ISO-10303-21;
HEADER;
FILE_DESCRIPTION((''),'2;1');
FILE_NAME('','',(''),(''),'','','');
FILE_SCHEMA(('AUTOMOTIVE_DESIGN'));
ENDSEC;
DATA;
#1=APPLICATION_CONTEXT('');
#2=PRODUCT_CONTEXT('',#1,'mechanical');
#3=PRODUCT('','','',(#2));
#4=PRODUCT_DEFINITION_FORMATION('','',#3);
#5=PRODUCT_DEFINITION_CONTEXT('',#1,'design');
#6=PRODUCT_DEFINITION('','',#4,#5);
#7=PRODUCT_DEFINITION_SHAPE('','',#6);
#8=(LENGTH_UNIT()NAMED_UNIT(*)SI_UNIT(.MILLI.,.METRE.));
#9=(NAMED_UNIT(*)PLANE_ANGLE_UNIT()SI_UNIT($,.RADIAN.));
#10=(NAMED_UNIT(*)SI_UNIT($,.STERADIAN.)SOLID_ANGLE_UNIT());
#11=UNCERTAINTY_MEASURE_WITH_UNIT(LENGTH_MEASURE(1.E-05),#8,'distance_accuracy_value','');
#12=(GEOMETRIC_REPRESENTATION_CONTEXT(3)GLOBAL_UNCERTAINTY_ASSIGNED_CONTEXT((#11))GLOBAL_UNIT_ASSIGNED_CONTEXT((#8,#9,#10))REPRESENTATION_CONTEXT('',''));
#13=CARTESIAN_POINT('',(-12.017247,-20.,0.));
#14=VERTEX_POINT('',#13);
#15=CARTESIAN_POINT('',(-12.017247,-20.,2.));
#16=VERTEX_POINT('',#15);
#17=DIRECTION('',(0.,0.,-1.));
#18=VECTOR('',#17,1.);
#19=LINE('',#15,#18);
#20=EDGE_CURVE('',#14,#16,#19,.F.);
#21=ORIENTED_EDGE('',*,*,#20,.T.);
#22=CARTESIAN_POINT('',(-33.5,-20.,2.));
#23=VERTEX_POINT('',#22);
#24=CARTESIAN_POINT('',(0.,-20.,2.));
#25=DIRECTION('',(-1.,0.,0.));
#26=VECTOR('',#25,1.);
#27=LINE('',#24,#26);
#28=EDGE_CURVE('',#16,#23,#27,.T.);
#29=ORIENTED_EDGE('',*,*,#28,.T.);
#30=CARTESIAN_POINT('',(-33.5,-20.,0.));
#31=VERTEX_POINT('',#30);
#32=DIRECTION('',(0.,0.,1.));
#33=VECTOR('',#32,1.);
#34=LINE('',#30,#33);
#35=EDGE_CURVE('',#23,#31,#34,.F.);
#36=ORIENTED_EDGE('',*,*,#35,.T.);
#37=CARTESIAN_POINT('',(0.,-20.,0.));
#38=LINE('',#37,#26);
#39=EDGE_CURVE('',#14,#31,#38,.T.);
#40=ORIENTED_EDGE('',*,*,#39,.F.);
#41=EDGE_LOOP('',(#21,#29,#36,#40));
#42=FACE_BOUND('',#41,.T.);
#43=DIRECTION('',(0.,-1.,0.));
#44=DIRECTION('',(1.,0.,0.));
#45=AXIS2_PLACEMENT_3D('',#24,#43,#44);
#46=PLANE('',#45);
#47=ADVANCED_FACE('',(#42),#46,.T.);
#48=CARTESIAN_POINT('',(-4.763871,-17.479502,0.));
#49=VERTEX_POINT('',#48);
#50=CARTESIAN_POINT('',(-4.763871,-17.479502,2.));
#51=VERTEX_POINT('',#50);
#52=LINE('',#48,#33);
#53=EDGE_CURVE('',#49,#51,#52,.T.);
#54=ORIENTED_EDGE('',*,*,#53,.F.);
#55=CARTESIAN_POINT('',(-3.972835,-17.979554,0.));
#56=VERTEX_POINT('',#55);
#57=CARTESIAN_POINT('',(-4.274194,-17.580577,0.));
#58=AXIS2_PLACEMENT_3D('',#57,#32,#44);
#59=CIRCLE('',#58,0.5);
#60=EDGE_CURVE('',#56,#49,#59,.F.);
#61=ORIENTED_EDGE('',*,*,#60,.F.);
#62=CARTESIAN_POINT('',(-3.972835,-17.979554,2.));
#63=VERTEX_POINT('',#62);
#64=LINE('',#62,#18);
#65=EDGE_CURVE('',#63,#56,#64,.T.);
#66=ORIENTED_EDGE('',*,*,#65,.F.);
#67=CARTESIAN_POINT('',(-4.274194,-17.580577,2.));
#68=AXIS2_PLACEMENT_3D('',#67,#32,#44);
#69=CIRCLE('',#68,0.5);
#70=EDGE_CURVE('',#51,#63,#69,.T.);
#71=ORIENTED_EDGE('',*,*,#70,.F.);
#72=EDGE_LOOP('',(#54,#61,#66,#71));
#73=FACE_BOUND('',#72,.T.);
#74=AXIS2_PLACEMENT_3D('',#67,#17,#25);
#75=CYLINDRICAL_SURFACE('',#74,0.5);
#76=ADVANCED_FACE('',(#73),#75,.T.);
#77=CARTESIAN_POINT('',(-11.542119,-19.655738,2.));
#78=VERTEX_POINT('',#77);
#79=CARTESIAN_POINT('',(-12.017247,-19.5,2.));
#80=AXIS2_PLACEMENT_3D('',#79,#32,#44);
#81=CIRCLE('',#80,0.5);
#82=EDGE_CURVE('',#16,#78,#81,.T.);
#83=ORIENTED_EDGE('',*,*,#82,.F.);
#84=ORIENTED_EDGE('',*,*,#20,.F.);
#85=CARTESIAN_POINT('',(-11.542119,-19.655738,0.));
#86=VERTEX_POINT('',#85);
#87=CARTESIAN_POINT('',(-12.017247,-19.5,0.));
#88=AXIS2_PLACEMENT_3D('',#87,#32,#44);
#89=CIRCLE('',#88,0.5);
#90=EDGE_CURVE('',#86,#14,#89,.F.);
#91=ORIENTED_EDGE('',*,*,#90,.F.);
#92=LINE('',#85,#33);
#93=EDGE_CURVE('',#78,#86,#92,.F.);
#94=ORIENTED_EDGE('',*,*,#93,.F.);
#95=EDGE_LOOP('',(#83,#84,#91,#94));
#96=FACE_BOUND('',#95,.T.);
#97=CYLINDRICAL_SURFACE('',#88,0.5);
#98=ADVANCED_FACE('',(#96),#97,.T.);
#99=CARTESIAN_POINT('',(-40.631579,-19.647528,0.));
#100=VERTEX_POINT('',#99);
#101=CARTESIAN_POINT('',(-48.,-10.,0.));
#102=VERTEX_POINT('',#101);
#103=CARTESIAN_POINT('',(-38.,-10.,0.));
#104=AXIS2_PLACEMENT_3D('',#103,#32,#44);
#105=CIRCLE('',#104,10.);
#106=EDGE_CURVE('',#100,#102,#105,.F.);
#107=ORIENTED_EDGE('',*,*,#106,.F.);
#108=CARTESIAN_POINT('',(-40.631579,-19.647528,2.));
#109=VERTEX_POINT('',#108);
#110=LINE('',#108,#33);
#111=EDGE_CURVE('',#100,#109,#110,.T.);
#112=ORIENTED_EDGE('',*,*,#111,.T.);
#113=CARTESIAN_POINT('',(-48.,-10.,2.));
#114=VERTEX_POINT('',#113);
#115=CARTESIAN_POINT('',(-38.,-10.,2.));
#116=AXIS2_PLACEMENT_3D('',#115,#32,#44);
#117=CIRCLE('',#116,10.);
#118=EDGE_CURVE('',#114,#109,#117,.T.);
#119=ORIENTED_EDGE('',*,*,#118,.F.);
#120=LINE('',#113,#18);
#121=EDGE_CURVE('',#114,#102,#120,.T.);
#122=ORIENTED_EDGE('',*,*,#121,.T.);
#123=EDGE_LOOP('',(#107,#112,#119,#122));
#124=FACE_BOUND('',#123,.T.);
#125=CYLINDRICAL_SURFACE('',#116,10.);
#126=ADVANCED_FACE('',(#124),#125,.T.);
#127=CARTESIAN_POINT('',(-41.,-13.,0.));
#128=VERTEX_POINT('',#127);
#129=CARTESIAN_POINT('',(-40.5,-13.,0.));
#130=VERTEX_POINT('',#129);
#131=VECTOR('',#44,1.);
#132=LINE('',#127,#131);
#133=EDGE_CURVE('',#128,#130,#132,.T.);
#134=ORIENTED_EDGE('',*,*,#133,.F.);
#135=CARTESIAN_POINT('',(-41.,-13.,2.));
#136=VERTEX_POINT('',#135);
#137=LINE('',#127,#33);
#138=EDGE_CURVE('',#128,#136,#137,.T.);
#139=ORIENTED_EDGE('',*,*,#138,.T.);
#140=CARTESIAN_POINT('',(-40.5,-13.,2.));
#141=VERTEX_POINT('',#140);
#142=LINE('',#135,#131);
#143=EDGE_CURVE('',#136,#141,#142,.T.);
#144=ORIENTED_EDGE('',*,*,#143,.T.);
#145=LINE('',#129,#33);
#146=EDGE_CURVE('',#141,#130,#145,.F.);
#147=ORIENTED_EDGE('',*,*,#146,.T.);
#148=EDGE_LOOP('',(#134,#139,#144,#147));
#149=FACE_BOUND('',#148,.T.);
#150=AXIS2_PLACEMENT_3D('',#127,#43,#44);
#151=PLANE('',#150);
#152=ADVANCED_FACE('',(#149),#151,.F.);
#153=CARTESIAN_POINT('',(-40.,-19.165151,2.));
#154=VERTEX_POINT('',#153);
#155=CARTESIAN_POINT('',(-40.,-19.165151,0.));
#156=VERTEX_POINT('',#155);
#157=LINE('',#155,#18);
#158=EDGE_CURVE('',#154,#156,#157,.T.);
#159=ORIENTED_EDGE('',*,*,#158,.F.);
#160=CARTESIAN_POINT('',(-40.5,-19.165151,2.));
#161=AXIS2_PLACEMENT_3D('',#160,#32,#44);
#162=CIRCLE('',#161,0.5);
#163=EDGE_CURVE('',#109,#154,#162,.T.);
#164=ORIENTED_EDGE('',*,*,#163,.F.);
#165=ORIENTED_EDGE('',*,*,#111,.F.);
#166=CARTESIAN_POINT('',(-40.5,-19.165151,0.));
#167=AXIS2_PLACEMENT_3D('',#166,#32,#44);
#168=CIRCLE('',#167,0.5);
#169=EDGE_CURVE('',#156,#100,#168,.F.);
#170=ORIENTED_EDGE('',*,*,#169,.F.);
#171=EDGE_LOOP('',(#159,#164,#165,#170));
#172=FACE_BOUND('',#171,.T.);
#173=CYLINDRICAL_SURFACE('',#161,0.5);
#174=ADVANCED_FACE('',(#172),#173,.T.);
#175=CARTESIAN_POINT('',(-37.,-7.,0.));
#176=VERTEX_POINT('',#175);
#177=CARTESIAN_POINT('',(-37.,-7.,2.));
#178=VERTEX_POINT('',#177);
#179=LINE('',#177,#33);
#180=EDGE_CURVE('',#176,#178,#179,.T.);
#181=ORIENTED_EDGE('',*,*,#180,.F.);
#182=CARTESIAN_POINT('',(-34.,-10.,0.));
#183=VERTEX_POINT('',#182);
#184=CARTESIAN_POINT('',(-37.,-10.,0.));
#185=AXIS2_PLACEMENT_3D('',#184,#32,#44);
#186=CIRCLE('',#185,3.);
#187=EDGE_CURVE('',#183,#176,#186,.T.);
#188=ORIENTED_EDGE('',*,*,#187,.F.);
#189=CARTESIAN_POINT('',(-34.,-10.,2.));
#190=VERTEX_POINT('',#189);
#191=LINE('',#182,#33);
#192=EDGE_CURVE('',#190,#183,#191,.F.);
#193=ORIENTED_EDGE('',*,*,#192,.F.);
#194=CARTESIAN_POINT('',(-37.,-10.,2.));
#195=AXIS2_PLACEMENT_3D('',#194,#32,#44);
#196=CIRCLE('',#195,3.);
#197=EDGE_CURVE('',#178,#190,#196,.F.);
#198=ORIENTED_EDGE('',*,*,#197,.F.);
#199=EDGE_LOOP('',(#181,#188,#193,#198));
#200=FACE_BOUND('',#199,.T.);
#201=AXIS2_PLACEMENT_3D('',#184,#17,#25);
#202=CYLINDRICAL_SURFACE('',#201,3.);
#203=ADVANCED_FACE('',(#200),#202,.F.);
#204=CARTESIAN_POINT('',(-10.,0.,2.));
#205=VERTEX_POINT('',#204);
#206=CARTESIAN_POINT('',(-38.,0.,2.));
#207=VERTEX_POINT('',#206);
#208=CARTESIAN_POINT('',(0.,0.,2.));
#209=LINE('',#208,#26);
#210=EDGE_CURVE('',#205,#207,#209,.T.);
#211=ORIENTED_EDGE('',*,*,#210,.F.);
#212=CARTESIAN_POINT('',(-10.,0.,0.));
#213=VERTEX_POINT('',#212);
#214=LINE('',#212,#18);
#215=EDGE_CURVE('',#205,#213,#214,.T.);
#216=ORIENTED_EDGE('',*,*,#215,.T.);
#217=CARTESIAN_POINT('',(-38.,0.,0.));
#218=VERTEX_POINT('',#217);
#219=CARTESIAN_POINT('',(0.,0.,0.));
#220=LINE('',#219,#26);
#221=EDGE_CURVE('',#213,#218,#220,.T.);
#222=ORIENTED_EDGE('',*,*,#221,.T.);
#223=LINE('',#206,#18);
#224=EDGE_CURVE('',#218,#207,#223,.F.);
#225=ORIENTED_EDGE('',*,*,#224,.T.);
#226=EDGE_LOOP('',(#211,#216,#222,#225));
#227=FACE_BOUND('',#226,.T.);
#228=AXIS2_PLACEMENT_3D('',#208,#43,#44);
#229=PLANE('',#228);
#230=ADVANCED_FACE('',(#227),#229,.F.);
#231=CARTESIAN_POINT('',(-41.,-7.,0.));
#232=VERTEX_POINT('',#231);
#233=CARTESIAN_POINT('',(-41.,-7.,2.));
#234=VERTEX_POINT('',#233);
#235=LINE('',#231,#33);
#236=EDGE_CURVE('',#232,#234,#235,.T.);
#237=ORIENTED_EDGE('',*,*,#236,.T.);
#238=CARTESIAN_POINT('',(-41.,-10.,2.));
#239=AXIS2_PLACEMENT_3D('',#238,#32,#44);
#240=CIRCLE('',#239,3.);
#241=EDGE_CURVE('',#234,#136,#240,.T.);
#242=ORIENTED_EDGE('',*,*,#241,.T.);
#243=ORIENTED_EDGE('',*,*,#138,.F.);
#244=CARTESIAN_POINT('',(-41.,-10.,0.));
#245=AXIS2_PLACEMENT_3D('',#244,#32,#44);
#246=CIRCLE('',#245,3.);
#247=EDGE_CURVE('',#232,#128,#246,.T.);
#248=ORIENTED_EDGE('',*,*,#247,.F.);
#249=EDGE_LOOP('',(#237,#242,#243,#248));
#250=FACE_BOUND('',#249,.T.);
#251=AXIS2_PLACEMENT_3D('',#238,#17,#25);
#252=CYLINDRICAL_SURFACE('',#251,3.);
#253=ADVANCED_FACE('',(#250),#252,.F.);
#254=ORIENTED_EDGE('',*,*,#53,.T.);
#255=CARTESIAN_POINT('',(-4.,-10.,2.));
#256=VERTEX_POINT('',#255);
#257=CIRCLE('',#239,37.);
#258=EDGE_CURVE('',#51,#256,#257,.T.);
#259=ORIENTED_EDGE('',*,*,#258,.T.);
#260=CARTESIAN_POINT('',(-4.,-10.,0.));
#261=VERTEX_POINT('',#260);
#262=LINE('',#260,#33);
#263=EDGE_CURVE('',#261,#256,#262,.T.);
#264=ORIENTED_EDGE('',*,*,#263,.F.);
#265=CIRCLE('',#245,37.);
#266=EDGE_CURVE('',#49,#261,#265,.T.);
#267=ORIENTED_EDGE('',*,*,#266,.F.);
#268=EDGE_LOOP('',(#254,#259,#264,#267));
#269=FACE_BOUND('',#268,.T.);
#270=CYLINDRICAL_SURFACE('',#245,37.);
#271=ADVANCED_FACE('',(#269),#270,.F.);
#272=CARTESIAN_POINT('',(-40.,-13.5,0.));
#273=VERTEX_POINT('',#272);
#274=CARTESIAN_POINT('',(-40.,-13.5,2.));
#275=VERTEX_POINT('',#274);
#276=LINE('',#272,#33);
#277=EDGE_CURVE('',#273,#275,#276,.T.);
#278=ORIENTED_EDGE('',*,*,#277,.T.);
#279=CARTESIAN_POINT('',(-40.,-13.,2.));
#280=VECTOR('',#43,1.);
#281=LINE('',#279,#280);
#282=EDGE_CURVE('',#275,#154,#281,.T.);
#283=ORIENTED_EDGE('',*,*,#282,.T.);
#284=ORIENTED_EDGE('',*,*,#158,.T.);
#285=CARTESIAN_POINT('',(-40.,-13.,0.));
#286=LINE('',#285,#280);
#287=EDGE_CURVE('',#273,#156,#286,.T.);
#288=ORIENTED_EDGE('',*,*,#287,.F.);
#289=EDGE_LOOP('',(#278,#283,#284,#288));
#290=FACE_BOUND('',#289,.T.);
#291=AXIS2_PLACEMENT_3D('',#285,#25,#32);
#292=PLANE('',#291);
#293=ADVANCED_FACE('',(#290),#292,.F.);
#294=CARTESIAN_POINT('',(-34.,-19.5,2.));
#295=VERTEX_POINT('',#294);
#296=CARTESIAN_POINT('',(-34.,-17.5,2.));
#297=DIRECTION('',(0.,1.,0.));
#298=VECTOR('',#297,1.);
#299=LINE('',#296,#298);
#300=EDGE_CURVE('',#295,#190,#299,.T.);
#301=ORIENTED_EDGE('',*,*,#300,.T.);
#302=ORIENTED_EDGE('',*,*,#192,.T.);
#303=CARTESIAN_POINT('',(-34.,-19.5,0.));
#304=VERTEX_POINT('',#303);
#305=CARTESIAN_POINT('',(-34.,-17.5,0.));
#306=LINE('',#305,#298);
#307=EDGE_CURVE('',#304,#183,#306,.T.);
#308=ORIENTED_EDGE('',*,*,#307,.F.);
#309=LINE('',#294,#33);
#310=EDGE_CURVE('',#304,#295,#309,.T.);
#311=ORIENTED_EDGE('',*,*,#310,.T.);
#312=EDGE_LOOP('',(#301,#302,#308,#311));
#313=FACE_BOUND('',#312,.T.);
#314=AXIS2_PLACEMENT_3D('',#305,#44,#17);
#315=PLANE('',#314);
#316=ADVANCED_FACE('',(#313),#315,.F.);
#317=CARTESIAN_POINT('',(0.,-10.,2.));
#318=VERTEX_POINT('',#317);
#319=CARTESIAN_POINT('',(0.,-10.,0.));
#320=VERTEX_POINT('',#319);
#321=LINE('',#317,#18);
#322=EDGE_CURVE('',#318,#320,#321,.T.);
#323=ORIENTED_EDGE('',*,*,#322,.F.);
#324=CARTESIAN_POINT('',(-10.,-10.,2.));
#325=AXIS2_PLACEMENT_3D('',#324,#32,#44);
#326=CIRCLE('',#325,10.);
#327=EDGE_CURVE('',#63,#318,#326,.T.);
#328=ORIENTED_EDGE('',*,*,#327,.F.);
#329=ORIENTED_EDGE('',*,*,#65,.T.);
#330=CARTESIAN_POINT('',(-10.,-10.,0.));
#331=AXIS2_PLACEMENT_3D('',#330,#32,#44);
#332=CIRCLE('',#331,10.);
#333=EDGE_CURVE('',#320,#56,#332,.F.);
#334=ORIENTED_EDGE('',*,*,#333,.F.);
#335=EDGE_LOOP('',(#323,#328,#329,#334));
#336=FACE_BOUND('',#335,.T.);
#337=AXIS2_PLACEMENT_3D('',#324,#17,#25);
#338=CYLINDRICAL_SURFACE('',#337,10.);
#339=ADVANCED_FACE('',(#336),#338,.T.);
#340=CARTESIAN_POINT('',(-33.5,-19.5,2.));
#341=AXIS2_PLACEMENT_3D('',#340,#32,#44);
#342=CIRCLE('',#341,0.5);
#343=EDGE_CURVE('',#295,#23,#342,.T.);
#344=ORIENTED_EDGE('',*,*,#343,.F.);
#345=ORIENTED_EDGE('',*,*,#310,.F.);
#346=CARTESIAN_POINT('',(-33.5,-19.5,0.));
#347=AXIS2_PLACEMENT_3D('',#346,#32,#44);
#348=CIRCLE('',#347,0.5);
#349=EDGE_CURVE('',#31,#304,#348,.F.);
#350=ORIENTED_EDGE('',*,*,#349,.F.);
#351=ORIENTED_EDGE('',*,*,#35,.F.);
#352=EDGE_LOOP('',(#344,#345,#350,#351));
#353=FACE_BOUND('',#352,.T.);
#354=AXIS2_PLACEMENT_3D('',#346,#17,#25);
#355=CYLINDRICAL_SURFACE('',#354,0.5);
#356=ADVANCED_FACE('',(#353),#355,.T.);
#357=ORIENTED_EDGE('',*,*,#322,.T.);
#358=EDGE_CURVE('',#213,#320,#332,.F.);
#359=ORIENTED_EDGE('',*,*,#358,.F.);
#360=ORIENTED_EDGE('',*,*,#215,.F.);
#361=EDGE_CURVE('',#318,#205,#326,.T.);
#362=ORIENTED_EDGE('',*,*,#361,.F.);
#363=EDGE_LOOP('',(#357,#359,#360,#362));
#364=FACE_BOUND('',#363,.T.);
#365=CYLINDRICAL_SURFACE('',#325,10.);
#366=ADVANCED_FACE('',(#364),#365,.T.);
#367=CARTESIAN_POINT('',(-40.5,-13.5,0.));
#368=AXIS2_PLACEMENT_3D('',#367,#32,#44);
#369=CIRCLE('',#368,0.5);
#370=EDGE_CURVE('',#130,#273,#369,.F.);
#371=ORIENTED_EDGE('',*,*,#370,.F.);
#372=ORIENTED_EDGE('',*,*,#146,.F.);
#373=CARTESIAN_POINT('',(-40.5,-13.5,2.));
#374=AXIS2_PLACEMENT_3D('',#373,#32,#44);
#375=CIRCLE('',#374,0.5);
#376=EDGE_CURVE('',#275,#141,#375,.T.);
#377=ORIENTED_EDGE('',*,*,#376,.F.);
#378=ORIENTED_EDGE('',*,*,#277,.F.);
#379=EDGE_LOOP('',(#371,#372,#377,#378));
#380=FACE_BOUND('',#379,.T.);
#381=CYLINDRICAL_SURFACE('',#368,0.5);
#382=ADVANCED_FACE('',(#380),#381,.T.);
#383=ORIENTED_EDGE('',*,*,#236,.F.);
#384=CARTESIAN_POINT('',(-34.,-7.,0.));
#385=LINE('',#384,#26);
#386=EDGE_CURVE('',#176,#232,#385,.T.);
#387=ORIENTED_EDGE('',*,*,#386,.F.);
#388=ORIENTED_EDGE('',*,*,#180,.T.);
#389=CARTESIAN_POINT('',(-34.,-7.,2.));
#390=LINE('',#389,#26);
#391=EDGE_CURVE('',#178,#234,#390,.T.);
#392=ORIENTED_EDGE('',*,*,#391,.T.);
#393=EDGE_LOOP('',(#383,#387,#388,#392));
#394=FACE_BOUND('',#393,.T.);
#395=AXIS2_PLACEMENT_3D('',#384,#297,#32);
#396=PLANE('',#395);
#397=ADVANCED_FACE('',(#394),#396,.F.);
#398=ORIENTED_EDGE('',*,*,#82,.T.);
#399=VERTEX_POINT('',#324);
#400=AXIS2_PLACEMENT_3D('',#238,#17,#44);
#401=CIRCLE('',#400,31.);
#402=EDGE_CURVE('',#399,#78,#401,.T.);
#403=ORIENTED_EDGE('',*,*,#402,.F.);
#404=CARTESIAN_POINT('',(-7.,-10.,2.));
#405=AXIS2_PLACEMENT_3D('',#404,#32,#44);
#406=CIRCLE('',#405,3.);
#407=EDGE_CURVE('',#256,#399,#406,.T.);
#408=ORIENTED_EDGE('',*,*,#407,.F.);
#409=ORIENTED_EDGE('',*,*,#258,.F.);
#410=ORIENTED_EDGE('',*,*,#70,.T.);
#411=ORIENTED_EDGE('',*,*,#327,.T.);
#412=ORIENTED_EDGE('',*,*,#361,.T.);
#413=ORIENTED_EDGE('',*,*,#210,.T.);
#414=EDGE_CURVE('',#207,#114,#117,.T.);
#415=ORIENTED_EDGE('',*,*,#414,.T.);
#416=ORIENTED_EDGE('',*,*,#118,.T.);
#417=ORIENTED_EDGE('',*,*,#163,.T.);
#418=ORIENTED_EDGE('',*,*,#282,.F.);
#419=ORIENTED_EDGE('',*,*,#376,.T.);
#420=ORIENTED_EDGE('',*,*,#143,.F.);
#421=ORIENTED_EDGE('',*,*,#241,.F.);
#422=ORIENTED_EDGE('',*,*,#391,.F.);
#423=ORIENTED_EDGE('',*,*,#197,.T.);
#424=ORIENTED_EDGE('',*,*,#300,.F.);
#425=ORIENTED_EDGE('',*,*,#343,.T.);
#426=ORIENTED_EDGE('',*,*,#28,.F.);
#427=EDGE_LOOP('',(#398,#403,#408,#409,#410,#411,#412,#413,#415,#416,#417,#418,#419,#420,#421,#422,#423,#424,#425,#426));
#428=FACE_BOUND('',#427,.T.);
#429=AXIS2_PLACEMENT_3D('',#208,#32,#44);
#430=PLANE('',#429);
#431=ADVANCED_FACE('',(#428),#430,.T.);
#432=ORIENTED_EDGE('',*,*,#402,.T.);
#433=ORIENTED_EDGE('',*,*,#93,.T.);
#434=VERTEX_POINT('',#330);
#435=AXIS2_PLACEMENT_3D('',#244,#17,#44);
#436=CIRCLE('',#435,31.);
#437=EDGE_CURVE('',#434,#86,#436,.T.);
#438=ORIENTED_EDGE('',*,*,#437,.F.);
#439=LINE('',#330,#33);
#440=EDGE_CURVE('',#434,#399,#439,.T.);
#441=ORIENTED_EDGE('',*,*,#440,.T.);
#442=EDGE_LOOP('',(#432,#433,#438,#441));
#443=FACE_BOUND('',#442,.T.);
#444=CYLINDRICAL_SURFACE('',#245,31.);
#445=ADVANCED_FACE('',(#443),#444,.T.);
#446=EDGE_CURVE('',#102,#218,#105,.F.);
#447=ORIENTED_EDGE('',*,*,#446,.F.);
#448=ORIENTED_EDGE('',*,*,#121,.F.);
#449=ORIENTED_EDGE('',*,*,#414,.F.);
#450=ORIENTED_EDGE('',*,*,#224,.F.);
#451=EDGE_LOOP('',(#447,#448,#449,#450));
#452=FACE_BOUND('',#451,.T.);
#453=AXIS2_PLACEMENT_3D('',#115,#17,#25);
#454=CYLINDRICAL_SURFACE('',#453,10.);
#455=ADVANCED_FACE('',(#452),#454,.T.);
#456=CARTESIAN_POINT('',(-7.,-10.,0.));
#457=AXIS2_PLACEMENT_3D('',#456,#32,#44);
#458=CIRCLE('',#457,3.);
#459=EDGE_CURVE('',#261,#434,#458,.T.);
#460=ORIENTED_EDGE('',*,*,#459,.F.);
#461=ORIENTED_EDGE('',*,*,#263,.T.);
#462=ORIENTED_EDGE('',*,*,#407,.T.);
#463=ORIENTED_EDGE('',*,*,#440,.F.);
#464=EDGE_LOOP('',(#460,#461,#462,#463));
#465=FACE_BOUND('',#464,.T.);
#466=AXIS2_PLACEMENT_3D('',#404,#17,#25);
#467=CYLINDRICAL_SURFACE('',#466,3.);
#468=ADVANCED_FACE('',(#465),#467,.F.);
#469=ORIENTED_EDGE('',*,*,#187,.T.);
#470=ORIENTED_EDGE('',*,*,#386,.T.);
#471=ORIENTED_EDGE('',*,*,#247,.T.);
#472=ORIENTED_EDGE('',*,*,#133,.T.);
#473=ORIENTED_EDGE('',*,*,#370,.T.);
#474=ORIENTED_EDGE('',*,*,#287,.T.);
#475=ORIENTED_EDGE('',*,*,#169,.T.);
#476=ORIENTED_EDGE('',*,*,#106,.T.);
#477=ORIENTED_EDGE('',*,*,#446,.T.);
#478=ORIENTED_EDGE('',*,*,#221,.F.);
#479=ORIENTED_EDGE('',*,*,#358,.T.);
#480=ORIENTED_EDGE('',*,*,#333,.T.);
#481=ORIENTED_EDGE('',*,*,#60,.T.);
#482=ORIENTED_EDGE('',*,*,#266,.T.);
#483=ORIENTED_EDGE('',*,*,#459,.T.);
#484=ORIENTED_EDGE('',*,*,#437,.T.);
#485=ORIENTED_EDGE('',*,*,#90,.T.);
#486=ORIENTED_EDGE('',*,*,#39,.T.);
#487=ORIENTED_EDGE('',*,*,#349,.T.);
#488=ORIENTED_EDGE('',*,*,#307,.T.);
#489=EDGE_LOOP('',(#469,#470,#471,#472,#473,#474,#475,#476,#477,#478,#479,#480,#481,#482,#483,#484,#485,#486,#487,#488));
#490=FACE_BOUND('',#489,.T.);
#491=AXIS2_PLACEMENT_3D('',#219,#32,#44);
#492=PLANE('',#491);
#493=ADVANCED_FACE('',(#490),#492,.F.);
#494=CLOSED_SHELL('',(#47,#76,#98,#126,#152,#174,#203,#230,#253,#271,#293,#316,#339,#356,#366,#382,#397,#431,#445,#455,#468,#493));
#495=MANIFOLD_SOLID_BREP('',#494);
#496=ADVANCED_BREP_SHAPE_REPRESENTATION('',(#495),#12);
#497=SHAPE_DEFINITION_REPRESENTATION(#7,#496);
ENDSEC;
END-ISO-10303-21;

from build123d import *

# Parameters (mm, degrees)
SZKIC1_W                    = 48
SZKIC1_H                    = 20
SZKIC1_R                    = 3
DODANIE_WYCI_GNI_CIE2_DEPTH = 2
ZAOKR_GLENIE3_R             = 10
WYTNIJ_WYCI_GNI_CIE1_DEPTH  = 53.038447325
ZAOKR_GLENIE1_R             = 3
ZAOKR_GLENIE2_R             = 0.5


with BuildPart() as part:
    # Szkic1 → Dodanie-wyciągnięcie2 (new body)
    with BuildSketch(Plane.XY):
        with Locations((-24, -10)):
            Rectangle(SZKIC1_W, SZKIC1_H)
        with Locations((-7, -10)):
            Circle(SZKIC1_R, mode=Mode.SUBTRACT)
        with Locations((-41, -10)):
            Circle(SZKIC1_R, mode=Mode.SUBTRACT)
    extrude(amount=DODANIE_WYCI_GNI_CIE2_DEPTH)

    # Zaokrąglenie3
    zaokr_glenie3_edges = [part.edges().sort_by_distance(p)[0] for p in [
        (0, 0, 1),
        (0, -20, 1),
        (-48, -20, 1),
        (-48, 0, 1),
    ]]
    fillet(zaokr_glenie3_edges, radius=ZAOKR_GLENIE3_R - 0.0001)  # a hair under: the kernel refuses the full size

    # Szkic2 → Wytnij-wyciągnięcie1 (cut, through all)
    with BuildSketch(Plane.XY.offset(2)):
        with BuildLine():
            Line((-10, -10), (-4, -10))
            ThreePointArc((-4, -10), (-4.345859909, -15.047178833), (-5.376973739, -20))
            Line((-5.376973739, -20), (-11.657198498, -20))
            ThreePointArc((-11.657198498, -20), (-10.417105708, -15.068192648), (-10, -10))
        make_face()
        Polygon((-41, -10), (-41, -13), (-40, -13), (-40, -20), (-34, -20), (-34, -17.5), (-34, -7), (-41, -7), align=None)
    extrude(amount=-WYTNIJ_WYCI_GNI_CIE1_DEPTH, mode=Mode.SUBTRACT)

    # Zaokrąglenie1
    zaokr_glenie1_edges = [part.edges().sort_by_distance(p)[0] for p in [
        (-34, -7, 1),
    ]]
    fillet(zaokr_glenie1_edges, radius=ZAOKR_GLENIE1_R)

    # Zaokrąglenie2
    zaokr_glenie2_edges = [part.edges().sort_by_distance(p)[0] for p in [
        (-40, -19.797977321, 1),
        (-5.032269828, -18.678847057, 1),
        (-34, -20, 1),
        (-40, -13, 1),
        (-11.657198498, -20, 1),
    ]]
    fillet(zaokr_glenie2_edges, radius=ZAOKR_GLENIE2_R)


solid = part.part
